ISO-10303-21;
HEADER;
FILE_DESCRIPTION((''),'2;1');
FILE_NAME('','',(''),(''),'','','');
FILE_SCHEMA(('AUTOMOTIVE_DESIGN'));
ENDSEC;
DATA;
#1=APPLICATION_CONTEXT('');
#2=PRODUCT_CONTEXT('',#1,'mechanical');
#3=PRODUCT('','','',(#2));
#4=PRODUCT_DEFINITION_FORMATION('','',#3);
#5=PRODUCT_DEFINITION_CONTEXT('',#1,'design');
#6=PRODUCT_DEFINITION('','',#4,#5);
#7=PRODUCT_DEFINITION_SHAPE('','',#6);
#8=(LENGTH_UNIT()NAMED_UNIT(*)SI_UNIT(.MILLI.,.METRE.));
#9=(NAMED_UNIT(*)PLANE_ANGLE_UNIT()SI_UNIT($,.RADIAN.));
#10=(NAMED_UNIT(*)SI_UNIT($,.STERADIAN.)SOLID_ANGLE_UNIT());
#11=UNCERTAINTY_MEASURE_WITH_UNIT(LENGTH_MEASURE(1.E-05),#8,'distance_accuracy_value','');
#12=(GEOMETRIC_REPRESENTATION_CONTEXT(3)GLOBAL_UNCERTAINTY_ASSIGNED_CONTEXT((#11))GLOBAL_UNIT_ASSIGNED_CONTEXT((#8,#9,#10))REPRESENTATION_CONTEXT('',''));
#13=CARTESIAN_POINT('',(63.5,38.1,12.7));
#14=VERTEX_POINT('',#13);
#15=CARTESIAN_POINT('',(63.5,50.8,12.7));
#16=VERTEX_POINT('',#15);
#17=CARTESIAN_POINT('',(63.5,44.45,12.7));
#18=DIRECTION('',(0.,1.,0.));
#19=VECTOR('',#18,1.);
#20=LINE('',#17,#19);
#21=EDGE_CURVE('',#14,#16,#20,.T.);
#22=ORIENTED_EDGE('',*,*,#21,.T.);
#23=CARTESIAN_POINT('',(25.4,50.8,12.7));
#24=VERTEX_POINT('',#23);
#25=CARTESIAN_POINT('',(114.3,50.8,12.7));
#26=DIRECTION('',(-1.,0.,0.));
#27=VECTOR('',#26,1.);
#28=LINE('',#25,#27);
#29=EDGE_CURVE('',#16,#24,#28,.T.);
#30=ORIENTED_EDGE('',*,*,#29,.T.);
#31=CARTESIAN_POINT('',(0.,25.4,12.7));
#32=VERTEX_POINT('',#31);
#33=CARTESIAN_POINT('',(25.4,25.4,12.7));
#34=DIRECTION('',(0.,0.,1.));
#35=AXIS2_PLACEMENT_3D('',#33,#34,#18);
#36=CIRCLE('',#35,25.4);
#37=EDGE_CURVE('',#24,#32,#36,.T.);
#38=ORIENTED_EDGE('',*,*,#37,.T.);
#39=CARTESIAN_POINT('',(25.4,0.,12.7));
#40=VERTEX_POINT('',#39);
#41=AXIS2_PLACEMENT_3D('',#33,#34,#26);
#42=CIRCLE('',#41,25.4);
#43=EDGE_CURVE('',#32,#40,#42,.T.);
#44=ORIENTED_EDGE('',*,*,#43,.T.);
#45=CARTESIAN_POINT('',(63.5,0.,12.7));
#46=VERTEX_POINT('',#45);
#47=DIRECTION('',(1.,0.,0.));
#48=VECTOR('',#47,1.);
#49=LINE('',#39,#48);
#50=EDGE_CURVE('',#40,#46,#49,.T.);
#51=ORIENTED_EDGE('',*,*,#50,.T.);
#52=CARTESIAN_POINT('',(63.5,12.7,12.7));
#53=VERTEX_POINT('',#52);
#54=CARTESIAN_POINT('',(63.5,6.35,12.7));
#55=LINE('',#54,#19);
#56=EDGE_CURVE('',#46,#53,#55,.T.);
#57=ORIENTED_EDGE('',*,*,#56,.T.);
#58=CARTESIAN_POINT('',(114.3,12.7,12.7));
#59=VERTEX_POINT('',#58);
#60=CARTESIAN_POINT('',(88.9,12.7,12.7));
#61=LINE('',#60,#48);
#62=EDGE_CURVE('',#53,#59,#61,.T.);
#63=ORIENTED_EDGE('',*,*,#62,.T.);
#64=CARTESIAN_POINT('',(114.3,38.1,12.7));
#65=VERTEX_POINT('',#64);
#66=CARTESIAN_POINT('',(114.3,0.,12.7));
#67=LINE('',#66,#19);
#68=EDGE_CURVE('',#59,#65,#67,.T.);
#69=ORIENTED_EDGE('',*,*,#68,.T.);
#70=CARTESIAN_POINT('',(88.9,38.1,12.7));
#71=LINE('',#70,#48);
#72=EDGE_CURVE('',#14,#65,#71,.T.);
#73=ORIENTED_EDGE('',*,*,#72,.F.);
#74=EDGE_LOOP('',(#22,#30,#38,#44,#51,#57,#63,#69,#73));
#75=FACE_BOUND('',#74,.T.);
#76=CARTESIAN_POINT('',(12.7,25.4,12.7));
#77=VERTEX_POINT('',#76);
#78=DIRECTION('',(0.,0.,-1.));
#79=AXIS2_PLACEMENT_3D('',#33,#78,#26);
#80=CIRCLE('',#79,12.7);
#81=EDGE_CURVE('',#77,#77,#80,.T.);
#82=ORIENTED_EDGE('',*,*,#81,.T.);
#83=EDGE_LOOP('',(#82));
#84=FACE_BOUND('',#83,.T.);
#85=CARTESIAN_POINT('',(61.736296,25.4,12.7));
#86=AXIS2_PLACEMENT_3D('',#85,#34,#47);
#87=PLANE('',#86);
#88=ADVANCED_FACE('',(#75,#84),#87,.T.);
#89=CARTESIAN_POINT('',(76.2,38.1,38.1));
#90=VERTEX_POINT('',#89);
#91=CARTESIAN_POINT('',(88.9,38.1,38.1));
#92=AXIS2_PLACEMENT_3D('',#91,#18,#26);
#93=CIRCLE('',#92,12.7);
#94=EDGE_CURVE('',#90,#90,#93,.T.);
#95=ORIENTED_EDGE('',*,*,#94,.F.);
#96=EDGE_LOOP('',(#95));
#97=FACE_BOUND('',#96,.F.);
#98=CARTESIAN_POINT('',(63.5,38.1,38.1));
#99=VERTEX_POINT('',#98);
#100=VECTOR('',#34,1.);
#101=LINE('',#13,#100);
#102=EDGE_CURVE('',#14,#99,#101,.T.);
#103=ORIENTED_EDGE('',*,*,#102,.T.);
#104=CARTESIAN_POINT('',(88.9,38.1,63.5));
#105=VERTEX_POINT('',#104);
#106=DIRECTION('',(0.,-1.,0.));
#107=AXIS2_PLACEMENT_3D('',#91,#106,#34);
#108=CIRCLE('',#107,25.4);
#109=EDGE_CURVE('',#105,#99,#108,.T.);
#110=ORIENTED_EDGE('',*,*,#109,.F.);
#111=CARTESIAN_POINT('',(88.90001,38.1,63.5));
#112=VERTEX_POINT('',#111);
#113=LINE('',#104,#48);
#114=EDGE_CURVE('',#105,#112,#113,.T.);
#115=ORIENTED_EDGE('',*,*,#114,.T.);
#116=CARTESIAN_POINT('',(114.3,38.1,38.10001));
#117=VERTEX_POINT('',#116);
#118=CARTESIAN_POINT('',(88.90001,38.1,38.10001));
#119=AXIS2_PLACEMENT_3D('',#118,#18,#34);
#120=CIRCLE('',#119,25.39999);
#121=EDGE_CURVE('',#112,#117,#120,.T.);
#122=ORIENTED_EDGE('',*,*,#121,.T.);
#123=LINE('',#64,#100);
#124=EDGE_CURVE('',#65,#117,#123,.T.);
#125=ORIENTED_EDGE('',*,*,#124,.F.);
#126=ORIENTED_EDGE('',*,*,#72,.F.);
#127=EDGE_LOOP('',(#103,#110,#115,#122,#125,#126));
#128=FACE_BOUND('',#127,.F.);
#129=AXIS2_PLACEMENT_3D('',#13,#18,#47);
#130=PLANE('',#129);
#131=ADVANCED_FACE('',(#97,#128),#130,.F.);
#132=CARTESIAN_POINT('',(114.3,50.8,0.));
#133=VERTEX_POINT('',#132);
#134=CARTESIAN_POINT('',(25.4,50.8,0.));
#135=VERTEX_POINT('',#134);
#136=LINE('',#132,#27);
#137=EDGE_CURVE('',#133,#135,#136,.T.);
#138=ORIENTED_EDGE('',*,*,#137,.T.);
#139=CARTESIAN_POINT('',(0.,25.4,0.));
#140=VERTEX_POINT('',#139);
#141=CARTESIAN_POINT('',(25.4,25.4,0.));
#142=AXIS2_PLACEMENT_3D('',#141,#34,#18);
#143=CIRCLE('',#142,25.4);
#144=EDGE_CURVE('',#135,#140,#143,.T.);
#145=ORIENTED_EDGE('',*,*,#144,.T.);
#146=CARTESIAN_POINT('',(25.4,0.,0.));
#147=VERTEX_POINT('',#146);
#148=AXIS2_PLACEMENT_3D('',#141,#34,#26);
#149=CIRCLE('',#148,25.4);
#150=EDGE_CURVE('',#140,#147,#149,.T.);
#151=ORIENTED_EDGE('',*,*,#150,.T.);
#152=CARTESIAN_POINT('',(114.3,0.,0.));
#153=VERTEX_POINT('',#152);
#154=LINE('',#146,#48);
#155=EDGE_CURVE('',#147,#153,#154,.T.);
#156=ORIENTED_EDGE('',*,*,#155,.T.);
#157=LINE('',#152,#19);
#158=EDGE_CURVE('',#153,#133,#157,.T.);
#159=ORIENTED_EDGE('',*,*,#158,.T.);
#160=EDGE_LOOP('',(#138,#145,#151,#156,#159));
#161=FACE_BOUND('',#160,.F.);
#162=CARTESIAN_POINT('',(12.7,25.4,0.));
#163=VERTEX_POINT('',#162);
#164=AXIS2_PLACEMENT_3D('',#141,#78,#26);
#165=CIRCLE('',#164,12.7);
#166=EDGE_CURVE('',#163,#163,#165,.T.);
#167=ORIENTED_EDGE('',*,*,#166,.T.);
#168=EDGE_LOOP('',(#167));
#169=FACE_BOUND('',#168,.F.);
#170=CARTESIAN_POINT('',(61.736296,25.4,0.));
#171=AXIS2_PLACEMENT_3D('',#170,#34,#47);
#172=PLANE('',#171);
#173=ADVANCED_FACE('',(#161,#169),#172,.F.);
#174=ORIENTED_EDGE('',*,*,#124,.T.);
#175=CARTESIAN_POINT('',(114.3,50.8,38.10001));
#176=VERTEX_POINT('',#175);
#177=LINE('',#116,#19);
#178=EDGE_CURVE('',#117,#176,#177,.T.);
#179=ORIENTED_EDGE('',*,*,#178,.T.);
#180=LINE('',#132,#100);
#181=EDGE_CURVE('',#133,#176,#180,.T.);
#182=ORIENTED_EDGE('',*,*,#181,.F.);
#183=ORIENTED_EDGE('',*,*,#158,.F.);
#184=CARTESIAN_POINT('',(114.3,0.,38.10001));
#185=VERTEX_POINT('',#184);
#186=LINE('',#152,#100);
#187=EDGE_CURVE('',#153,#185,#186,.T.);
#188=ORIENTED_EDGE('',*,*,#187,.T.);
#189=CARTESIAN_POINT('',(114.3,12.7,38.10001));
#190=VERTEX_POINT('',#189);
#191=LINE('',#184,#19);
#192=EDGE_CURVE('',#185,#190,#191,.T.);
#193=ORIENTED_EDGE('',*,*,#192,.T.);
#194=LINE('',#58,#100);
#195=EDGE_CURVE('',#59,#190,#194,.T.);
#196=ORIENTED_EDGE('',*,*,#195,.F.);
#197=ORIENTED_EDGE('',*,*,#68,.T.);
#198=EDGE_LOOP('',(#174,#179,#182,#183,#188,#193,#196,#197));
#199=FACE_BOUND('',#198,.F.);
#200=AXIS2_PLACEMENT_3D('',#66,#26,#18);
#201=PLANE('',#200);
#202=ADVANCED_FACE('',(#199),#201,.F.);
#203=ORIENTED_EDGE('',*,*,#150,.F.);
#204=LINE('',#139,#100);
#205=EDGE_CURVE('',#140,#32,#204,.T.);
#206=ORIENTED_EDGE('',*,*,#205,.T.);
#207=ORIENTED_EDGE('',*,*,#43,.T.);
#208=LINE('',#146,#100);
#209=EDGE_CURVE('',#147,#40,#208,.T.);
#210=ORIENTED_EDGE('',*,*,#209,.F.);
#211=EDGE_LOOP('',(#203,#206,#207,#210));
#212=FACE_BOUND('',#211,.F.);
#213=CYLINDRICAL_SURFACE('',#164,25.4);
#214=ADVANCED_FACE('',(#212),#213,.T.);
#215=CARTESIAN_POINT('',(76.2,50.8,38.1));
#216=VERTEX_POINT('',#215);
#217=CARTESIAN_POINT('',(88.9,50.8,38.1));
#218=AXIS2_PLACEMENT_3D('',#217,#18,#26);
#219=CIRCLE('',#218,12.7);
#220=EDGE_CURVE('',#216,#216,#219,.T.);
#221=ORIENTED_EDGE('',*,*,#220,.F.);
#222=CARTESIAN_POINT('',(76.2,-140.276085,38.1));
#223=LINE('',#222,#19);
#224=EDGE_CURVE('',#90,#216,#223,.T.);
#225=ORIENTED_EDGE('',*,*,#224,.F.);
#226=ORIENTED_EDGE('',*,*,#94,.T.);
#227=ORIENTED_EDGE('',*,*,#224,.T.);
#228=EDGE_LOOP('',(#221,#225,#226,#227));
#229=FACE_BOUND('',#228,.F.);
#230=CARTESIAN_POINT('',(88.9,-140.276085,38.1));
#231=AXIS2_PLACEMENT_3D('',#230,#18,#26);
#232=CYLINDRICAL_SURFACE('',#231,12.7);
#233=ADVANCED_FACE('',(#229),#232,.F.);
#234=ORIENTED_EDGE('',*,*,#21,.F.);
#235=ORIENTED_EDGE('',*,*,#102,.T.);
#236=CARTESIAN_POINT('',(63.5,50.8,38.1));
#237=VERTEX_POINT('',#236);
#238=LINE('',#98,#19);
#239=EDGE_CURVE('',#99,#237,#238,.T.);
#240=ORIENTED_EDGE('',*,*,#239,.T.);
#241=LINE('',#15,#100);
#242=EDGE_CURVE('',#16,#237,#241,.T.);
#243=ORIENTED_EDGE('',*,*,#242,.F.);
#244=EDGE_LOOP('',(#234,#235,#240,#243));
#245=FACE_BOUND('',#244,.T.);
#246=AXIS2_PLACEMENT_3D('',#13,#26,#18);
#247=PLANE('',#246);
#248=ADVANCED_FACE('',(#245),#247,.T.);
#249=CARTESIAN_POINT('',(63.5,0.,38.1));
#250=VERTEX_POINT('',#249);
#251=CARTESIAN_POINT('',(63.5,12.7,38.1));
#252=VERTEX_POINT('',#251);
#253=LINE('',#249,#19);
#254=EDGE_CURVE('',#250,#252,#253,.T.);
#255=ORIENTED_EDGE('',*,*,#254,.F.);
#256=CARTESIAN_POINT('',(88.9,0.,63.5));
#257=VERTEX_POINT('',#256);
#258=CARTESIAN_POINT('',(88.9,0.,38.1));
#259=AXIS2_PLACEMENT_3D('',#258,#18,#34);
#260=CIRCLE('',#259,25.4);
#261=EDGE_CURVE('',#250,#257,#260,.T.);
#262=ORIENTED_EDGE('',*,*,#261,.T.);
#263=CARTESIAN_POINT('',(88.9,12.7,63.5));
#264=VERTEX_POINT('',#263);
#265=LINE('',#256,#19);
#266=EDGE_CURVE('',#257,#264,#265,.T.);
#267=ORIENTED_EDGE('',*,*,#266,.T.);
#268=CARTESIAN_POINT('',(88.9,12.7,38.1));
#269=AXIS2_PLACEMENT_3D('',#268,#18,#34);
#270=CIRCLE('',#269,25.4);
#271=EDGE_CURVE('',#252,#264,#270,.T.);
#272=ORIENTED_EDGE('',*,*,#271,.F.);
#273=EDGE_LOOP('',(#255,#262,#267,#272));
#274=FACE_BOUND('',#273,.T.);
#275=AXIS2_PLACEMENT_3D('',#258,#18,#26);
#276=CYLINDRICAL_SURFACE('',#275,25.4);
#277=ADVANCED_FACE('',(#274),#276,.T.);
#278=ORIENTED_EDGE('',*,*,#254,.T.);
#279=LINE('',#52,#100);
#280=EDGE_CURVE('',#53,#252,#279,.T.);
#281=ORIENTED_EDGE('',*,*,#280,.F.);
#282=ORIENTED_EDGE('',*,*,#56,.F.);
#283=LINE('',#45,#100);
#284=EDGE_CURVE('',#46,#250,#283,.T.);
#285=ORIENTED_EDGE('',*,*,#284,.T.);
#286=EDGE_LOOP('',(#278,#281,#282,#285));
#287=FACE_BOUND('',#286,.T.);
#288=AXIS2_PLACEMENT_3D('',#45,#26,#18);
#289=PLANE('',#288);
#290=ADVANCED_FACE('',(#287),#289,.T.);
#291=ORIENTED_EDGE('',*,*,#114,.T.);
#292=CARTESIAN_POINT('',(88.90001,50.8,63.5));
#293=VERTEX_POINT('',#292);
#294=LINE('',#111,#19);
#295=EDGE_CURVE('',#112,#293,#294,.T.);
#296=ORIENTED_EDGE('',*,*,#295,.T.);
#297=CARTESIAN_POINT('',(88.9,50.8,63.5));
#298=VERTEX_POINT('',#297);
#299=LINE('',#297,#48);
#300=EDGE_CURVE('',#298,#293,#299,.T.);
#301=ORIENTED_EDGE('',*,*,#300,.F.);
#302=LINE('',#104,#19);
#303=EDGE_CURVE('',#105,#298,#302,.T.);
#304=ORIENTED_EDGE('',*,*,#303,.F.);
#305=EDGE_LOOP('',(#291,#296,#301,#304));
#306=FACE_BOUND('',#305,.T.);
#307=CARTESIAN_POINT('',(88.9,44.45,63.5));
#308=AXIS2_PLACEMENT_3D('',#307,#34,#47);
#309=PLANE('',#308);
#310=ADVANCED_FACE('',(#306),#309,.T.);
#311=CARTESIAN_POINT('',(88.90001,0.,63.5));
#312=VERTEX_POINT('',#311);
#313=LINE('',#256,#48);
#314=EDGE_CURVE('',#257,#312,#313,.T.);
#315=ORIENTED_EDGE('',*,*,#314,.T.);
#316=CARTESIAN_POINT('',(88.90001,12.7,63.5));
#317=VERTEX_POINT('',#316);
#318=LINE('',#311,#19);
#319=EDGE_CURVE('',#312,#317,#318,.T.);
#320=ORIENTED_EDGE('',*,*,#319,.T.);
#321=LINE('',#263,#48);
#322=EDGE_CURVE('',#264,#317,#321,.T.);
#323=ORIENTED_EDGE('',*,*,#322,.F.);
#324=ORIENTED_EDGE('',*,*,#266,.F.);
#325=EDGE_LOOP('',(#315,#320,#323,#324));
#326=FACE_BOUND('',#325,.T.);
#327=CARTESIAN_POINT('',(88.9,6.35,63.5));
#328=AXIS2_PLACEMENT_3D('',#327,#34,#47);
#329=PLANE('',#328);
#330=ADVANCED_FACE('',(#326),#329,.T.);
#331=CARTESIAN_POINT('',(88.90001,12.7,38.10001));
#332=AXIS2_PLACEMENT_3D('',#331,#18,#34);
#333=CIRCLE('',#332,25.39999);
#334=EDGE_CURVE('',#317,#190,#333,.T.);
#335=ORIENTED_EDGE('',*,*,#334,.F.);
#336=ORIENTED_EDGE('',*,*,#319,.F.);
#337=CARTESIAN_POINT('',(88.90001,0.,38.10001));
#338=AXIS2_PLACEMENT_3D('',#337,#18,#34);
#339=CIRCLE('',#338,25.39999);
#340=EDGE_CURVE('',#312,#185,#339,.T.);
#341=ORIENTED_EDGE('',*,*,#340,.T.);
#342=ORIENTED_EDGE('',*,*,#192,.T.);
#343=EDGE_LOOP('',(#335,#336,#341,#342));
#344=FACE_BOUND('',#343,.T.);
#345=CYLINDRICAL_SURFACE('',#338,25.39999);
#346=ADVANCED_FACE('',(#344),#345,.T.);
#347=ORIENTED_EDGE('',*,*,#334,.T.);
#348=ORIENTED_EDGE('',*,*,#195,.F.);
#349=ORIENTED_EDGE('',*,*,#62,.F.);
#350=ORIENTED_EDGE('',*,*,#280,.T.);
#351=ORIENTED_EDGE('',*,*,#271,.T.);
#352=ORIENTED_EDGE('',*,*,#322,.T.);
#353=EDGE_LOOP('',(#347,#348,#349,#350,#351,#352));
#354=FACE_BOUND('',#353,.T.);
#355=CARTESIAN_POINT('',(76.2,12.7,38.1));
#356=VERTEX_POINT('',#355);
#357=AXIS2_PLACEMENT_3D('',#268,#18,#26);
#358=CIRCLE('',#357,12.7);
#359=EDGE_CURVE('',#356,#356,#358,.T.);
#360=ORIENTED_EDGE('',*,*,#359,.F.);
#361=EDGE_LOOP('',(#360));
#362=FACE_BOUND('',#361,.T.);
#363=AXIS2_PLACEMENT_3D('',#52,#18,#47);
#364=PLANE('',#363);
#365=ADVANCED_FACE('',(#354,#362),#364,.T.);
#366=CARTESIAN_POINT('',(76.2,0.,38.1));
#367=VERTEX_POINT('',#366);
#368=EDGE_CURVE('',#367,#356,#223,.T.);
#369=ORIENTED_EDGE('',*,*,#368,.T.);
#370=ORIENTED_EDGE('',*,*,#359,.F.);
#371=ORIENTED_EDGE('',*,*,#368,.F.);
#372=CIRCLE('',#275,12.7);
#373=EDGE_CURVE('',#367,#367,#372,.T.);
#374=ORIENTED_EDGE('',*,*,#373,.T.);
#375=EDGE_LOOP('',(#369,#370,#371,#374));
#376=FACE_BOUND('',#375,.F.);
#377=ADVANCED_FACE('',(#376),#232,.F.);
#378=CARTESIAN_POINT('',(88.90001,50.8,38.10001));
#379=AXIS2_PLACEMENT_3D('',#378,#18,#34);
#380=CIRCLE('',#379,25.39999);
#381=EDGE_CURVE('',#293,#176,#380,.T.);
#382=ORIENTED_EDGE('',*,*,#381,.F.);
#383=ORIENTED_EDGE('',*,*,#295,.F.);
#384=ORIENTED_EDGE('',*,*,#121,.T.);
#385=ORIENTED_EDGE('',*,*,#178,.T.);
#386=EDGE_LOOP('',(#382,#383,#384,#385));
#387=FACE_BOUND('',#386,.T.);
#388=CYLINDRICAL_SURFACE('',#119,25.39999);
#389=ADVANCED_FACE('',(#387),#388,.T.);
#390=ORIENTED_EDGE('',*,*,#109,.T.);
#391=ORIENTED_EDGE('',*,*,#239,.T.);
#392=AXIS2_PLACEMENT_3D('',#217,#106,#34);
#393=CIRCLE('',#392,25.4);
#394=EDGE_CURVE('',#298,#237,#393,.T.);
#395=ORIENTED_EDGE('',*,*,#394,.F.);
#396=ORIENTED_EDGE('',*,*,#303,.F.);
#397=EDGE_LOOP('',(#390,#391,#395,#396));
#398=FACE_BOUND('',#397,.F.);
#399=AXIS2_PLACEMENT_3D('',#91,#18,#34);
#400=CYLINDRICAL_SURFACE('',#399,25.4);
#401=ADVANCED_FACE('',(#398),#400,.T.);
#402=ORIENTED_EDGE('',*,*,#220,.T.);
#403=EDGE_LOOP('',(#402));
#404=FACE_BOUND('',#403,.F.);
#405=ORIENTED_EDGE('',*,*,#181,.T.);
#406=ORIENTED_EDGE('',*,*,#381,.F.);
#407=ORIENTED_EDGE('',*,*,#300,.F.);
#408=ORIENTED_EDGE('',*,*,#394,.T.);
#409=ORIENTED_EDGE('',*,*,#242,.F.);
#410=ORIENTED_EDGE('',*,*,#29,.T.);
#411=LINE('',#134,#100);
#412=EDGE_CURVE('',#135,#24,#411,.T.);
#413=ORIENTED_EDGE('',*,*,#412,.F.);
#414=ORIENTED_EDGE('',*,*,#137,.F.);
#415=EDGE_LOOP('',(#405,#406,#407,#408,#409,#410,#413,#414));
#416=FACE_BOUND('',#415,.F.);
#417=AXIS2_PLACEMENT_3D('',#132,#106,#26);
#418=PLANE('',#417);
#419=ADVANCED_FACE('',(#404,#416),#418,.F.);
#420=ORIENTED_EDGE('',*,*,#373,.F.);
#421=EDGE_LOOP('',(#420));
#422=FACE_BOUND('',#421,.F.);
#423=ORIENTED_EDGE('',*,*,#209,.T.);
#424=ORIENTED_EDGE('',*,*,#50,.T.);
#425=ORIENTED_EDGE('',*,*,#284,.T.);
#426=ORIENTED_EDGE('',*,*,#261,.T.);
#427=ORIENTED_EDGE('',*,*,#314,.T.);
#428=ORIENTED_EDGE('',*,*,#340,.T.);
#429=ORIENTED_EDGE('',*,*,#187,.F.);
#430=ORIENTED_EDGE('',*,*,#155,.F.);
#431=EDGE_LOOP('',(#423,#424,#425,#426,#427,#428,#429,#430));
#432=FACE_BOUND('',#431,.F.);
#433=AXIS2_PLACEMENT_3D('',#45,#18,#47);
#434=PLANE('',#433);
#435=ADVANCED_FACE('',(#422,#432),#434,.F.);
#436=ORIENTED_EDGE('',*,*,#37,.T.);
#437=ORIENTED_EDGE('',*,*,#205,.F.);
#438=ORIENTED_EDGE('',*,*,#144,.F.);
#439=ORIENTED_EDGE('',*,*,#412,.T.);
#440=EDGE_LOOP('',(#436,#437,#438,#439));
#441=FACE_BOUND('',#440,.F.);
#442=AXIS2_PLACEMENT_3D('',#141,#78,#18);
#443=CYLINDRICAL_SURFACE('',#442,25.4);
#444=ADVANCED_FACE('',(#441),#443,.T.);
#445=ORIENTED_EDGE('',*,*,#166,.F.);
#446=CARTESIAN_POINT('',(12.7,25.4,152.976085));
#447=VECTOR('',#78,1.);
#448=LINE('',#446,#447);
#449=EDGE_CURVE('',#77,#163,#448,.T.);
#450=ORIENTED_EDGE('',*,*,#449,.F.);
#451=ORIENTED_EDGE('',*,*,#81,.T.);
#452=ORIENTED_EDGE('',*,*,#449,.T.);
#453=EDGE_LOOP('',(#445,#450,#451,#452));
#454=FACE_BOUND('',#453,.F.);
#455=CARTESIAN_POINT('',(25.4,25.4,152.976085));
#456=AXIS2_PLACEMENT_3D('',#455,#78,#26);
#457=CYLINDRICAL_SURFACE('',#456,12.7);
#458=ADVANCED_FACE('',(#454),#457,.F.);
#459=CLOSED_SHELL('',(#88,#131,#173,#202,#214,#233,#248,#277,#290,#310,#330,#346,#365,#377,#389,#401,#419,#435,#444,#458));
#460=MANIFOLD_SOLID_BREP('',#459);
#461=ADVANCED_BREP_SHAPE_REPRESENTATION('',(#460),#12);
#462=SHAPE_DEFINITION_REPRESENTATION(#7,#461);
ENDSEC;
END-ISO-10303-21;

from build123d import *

# Parameters (mm, degrees)
F1_DEPTH = 12.7
F2_W     = 50.8
F2_H     = 12.7
F3_DEPTH = 50.8
F4_D     = 25.4
F5_R     = 25.4
F6_R     = 25.39999
F7_R     = 25.4
F8_R     = 25.39999
F10_D    = 25.4


# Not quite as in the source:
# - a fillet or chamfer is up to 0.001 mm smaller than in the source, because OpenCascade refuses the exact size


with BuildPart() as f1:
    # F0 (on Top) → F1 (new body)
    with BuildSketch(Plane.XY):
        with BuildLine():
            ThreePointArc((0, 25.4), (7.4394877579, 7.4394877579), (25.4, 0))
            Line((25.4, 0), (114.3, 0))
            Line((114.3, 0), (114.3, 50.8))
            Line((114.3, 50.8), (25.4, 50.8))
            ThreePointArc((25.4, 50.8), (7.4394877579, 43.3605122421), (0, 25.4))
        make_face()
    extrude(amount=F1_DEPTH)

    # F2 (on face) → F3 (join)
    with BuildSketch(Plane.XY.offset(12.7)):
        with Locations((88.9, 6.35)):
            Rectangle(F2_W, F2_H)
        with Locations((88.9, 44.45)):
            Rectangle(F2_W, F2_H)
    extrude(amount=F3_DEPTH)

    # F4 (through all)
    with Locations(Plane.XY.offset(12.7)):
        with Locations((25.4, 25.4)):
            Hole(F4_D / 2)

    # F5
    f5_edges = [f1.edges().sort_by_distance(p)[0] for p in [
        (63.5, 6.35, 63.5),
    ]]
    fillet(f5_edges, radius=F5_R)

    # F6 (radius 25.4 in the source; OpenCascade refuses exactly that, so slightly less here)
    f6_edges = [f1.edges().sort_by_distance(p)[0] for p in [
        (114.3, 6.35, 63.5),
    ]]
    fillet(f6_edges, radius=F6_R)

    # F7
    f7_edges = [f1.edges().sort_by_distance(p)[0] for p in [
        (63.5, 44.45, 63.5),
    ]]
    fillet(f7_edges, radius=F7_R)

    # F8 (radius 25.4 in the source; OpenCascade refuses exactly that, so slightly less here)
    f8_edges = [f1.edges().sort_by_distance(p)[0] for p in [
        (114.3, 44.45, 63.5),
    ]]
    fillet(f8_edges, radius=F8_R)

    # F10 (through all)
    with Locations(Plane.XZ):
        with Locations((88.9, 38.1)):
            Hole(F10_D / 2)


solid = f1.part
